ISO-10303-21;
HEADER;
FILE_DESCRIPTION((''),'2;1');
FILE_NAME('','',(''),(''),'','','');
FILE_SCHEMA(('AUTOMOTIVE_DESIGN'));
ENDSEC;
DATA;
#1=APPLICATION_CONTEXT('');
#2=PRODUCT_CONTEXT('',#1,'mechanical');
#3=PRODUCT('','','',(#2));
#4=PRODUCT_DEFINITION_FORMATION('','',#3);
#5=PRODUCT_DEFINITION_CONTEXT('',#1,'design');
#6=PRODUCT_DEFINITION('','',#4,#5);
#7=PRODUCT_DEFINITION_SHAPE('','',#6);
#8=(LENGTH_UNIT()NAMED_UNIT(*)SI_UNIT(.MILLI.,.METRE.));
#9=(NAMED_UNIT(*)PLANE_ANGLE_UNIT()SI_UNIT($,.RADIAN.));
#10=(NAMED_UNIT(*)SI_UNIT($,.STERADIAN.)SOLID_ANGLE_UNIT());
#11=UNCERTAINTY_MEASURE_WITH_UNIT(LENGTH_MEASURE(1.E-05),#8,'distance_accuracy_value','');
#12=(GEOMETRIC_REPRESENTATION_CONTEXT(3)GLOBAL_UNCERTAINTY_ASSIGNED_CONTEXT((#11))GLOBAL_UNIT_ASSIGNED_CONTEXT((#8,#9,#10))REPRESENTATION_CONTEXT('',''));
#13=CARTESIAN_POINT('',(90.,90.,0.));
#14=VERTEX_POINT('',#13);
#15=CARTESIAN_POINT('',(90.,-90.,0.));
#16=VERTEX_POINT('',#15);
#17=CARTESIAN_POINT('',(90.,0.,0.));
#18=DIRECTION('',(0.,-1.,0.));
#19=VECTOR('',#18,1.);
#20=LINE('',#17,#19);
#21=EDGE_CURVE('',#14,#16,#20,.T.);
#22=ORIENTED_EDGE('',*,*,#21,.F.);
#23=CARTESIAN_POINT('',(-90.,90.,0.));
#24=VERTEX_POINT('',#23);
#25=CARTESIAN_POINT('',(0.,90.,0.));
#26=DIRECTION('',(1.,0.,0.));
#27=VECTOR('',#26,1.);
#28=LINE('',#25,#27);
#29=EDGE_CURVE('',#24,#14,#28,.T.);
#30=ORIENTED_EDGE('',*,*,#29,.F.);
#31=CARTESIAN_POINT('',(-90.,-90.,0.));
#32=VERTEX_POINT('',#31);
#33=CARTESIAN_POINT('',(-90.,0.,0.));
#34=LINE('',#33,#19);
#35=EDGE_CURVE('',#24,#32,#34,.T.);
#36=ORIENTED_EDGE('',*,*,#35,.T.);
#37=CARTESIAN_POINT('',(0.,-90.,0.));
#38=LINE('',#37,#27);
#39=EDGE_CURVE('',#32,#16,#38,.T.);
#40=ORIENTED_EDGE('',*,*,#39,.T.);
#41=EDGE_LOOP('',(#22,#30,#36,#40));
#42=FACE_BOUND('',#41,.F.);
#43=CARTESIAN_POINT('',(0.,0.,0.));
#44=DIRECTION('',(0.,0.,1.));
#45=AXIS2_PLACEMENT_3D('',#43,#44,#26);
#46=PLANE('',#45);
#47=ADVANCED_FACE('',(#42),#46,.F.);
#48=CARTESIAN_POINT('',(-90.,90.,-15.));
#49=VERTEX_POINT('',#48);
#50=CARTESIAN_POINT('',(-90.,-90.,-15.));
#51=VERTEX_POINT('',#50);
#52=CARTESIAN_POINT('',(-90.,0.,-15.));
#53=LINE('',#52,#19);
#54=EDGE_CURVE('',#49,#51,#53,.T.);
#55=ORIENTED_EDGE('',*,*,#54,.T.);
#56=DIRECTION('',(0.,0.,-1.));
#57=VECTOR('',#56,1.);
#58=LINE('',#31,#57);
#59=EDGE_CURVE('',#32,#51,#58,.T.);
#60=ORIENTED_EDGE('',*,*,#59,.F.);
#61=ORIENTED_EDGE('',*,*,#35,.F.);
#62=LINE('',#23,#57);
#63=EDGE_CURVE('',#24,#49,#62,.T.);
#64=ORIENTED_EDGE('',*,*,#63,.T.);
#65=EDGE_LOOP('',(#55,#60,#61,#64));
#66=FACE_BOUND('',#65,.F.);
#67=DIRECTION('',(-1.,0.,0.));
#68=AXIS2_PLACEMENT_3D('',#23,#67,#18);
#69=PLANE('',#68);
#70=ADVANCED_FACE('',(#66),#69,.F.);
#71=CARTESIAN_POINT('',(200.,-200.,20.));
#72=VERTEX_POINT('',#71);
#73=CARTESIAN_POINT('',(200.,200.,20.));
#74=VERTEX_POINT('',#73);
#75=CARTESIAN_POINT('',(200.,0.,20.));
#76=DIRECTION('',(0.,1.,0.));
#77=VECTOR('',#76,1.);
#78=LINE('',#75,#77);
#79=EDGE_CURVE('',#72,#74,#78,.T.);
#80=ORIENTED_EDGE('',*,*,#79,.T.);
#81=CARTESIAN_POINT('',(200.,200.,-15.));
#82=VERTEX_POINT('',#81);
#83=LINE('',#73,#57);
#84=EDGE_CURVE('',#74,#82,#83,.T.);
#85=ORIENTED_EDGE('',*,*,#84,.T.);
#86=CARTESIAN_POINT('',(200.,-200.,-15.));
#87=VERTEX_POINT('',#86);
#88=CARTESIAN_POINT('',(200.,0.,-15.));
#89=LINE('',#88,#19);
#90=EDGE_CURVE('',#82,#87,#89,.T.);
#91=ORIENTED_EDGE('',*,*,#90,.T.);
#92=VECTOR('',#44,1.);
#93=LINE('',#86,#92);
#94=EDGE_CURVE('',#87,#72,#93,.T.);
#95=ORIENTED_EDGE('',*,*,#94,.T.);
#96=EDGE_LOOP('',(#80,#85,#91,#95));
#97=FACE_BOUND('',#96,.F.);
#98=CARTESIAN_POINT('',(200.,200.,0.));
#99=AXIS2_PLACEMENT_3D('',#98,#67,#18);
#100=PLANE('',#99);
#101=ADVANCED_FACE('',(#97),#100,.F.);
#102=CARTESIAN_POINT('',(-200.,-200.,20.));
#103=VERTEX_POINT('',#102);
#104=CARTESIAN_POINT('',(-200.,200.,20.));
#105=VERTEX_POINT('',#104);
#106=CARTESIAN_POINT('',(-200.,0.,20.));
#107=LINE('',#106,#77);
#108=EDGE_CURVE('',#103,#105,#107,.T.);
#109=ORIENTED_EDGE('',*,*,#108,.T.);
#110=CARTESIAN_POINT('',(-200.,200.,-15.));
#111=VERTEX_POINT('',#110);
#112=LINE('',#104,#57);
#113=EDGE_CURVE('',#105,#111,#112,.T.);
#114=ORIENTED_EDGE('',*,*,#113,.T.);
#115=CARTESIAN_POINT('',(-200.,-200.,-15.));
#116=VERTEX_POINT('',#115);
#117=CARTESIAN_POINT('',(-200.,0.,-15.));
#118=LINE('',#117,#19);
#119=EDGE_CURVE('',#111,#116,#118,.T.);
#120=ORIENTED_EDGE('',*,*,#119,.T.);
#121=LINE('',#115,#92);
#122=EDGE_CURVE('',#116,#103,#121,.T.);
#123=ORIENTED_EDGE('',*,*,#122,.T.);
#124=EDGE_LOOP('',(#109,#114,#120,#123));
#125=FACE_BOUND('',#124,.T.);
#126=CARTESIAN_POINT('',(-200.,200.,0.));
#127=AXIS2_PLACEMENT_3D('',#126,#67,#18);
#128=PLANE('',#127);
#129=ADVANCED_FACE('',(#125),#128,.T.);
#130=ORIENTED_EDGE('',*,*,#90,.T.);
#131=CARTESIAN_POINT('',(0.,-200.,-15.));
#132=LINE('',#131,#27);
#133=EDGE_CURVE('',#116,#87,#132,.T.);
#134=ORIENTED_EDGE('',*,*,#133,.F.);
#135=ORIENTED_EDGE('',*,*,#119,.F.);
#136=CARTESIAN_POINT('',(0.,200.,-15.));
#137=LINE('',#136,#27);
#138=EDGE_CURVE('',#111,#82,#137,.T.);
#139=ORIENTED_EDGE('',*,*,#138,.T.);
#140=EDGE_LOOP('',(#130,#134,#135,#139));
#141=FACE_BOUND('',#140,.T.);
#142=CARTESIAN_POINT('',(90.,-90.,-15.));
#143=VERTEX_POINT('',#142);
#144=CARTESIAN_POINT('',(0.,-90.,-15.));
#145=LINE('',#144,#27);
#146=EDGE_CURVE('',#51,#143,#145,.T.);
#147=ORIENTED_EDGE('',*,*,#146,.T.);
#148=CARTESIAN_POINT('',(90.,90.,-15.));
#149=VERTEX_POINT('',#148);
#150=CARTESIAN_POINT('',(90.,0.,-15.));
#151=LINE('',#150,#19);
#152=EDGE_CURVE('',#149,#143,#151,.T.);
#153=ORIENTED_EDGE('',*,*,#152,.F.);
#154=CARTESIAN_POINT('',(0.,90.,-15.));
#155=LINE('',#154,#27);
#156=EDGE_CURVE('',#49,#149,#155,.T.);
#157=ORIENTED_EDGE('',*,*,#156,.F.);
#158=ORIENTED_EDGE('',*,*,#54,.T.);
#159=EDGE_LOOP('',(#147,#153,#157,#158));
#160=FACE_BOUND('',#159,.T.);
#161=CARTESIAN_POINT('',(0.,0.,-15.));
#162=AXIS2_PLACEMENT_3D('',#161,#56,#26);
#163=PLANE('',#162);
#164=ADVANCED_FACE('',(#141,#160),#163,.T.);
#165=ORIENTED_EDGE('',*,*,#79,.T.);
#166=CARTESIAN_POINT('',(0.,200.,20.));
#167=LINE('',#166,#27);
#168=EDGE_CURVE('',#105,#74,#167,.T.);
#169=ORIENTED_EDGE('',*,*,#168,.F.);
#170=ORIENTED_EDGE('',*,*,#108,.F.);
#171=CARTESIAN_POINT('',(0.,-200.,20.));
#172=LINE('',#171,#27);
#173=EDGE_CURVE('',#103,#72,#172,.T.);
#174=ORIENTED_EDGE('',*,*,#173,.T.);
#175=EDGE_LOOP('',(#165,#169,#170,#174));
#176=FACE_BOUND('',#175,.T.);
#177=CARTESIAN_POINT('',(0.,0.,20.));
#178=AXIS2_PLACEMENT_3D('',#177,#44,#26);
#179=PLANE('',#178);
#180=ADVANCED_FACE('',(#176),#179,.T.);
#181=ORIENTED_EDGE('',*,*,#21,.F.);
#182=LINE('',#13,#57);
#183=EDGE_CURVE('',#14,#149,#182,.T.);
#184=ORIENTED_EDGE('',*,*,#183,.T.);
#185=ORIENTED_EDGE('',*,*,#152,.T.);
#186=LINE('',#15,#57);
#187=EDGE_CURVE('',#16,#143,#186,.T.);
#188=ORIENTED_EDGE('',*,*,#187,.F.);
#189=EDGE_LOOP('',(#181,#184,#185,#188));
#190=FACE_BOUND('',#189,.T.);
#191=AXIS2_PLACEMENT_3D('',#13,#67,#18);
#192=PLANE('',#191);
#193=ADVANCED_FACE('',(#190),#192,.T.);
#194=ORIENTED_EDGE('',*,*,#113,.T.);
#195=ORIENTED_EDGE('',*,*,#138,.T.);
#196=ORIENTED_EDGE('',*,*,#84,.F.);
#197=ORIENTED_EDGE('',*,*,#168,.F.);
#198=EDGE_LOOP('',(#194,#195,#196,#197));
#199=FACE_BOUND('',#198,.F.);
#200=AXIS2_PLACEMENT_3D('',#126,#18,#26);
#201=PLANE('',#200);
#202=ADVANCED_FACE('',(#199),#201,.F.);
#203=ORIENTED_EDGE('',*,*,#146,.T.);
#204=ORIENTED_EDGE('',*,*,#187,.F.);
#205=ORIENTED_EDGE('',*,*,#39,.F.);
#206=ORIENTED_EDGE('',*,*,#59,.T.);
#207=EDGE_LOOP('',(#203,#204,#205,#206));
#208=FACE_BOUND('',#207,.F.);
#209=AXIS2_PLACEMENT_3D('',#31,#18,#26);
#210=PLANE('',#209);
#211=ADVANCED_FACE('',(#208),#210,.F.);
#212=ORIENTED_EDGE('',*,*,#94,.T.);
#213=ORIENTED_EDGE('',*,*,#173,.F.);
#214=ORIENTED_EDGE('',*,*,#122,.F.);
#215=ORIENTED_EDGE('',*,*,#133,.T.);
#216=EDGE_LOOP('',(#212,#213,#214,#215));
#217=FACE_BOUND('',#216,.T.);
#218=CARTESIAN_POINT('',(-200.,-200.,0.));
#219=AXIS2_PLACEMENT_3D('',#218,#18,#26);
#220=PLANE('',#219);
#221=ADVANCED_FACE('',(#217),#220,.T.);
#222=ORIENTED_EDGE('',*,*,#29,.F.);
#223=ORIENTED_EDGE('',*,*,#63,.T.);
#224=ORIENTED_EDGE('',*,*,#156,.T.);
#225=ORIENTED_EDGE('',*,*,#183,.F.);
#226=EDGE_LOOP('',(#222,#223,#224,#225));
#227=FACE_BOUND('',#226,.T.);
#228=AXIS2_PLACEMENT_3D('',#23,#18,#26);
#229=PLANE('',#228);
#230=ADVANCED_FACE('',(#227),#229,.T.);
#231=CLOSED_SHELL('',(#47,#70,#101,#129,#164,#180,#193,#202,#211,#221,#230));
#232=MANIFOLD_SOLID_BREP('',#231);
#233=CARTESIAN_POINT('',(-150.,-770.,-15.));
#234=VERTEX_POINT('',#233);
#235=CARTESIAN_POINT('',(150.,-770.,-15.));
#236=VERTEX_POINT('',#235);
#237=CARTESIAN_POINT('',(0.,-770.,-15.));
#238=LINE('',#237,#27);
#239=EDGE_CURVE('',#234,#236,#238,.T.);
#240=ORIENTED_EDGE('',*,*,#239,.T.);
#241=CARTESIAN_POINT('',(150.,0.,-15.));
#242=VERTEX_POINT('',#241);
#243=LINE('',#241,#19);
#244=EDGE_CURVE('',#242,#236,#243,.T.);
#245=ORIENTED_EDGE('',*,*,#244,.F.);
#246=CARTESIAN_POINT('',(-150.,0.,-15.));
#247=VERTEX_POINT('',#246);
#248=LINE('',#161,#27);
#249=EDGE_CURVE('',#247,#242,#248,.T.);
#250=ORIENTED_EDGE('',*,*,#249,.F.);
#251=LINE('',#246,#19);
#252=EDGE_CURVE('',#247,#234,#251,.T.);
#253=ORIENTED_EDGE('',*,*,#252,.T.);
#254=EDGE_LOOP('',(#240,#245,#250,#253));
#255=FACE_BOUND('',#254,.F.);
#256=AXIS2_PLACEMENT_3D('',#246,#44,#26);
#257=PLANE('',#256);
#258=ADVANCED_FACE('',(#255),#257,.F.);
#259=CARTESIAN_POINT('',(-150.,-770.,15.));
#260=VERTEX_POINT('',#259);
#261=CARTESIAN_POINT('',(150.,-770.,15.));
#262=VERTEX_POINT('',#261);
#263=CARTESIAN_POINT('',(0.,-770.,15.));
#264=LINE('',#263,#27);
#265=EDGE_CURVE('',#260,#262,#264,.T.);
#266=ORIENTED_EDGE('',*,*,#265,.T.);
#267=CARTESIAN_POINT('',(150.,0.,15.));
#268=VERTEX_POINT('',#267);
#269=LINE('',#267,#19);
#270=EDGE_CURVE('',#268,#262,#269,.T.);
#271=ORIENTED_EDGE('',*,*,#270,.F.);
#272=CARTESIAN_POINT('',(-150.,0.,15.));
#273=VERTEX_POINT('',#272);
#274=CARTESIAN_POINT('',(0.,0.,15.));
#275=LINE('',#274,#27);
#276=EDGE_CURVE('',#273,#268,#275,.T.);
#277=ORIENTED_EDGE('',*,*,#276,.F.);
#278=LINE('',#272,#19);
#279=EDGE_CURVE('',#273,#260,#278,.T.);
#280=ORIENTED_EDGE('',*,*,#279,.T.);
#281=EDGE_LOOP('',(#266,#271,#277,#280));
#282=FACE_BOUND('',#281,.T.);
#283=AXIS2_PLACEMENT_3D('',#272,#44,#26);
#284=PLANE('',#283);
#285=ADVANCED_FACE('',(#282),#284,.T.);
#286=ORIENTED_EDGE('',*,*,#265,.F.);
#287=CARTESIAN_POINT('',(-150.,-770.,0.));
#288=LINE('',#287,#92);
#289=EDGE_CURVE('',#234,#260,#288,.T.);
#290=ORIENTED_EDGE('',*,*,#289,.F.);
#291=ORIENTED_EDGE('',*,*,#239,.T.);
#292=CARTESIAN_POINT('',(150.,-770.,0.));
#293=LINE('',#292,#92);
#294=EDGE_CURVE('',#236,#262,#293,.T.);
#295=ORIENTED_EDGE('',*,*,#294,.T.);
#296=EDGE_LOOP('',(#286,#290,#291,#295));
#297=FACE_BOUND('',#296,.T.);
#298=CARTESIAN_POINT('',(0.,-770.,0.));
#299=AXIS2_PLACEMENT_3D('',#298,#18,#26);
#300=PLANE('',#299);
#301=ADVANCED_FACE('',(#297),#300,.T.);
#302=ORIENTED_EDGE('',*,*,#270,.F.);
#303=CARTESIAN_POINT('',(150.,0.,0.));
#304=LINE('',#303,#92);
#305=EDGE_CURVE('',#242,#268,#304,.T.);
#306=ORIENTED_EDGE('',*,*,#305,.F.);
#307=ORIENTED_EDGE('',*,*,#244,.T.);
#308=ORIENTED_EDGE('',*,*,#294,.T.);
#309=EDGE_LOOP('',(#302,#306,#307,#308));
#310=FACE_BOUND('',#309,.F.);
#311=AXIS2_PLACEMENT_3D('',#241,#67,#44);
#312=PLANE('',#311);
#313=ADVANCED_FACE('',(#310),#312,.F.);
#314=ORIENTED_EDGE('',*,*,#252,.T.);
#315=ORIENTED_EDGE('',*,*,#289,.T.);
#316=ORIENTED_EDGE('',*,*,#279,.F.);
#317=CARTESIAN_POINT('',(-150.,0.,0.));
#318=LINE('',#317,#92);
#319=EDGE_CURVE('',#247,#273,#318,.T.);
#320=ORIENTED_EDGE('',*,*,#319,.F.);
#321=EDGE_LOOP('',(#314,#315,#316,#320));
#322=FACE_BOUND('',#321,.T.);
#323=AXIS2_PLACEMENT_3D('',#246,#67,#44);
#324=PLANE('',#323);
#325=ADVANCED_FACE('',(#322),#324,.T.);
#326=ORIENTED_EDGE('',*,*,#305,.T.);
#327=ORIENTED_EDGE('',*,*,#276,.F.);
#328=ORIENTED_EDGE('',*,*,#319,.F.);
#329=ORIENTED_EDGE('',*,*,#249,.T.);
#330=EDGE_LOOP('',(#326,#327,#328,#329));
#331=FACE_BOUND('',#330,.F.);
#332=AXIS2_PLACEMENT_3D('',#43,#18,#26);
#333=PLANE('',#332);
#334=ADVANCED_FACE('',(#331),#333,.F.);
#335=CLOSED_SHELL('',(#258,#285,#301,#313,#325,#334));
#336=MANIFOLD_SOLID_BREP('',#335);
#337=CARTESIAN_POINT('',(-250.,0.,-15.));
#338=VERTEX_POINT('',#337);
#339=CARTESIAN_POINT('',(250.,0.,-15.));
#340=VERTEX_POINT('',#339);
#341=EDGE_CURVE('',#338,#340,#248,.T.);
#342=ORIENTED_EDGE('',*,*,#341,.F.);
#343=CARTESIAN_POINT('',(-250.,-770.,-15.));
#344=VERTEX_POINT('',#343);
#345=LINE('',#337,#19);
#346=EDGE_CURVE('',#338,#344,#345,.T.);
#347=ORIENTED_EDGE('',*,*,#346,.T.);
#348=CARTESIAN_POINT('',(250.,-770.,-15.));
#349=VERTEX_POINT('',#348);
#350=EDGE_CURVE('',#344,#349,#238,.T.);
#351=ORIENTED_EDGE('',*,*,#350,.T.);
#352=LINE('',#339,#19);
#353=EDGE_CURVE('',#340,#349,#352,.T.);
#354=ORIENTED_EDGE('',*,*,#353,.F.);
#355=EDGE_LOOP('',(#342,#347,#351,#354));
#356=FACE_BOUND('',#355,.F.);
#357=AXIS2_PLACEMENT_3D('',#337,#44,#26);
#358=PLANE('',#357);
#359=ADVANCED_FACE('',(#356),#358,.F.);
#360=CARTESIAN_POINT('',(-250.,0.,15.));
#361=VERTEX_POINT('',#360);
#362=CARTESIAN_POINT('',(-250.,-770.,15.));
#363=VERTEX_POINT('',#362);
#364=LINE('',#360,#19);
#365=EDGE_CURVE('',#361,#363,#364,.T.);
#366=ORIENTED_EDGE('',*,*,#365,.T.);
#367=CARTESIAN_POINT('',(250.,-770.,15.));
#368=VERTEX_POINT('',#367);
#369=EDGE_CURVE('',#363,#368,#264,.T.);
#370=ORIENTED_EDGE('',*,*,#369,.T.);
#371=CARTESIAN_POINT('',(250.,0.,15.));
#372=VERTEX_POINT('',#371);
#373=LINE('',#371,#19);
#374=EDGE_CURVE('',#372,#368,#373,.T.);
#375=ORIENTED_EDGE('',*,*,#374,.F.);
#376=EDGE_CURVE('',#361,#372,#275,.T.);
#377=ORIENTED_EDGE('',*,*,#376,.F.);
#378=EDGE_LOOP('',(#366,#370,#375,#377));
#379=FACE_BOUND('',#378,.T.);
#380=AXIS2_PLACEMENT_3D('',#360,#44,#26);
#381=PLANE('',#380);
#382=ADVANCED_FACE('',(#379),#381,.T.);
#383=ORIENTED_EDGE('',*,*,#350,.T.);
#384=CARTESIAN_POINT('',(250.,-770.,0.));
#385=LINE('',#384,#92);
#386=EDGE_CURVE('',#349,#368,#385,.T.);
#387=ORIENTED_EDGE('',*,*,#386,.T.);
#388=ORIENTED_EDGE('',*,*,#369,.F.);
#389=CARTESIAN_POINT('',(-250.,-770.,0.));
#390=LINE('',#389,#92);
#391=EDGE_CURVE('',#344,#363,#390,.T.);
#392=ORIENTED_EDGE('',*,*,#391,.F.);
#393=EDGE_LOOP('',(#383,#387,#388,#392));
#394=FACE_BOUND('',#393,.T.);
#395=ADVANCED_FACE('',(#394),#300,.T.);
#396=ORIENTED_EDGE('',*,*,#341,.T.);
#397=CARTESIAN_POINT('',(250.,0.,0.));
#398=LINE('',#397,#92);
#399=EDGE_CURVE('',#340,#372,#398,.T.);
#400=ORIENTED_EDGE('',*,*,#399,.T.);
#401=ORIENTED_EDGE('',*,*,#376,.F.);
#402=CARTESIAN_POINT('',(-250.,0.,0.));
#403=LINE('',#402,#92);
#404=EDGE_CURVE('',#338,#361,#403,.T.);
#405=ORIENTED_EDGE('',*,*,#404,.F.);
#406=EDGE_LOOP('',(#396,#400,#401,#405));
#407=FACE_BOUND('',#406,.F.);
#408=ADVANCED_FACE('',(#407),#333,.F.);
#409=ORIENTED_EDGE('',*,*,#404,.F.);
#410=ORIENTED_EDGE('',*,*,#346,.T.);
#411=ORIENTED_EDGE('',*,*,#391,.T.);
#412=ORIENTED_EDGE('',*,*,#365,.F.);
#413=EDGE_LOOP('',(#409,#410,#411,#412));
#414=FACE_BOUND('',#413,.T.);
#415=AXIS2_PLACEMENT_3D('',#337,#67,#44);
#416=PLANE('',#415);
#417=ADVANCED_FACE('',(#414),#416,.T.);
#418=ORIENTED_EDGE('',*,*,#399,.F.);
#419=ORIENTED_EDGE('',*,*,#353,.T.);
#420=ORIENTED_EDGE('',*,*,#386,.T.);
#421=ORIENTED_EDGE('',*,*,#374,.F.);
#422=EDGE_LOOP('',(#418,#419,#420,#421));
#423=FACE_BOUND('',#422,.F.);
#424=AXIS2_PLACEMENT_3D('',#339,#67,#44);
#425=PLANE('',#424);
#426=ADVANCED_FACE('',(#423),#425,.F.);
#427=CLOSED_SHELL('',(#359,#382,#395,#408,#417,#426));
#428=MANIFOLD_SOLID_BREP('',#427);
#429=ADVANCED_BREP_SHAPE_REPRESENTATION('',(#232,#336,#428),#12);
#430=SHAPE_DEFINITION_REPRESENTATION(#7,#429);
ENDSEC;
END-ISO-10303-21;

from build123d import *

# Parameters (mm, degrees)
F0_W     = 500
F0_H     = 30
F1_DEPTH = 770
F2_W     = 400
F2_H     = 400
F3_DEPTH = 20
F4_W     = 400
F4_H     = 400
F4_W_2   = 180
F4_H_2   = 180
F5_DEPTH = 15
F6_W     = 300
F6_H     = 30
F7_DEPTH = 770


with BuildPart() as f1:
    # F0 (on Front) → F1 (new body)
    with BuildSketch(Plane.XZ):
        Rectangle(F0_W, F0_H)
    extrude(amount=F1_DEPTH)


with BuildPart() as f3:
    # F2 (on Top) → F3 (new body)
    with BuildSketch(Plane.XY):
        Rectangle(F2_W, F2_H)
    extrude(amount=F3_DEPTH)

    # F4 (on face) → F5 (join)
    with BuildSketch(Plane(origin=(0, 0, 0), x_dir=(1, 0, 0), z_dir=(0, 0, -1))):
        Rectangle(F4_W, F4_H)
        Rectangle(F4_W_2, F4_H_2, mode=Mode.SUBTRACT)
    extrude(amount=F5_DEPTH)


with BuildPart() as f7:
    # F6 (on Front) → F7 (new body)
    with BuildSketch(Plane.XZ):
        Rectangle(F6_W, F6_H)
    extrude(amount=F7_DEPTH)


solid = Compound([f1.part, f3.part, f7.part])
